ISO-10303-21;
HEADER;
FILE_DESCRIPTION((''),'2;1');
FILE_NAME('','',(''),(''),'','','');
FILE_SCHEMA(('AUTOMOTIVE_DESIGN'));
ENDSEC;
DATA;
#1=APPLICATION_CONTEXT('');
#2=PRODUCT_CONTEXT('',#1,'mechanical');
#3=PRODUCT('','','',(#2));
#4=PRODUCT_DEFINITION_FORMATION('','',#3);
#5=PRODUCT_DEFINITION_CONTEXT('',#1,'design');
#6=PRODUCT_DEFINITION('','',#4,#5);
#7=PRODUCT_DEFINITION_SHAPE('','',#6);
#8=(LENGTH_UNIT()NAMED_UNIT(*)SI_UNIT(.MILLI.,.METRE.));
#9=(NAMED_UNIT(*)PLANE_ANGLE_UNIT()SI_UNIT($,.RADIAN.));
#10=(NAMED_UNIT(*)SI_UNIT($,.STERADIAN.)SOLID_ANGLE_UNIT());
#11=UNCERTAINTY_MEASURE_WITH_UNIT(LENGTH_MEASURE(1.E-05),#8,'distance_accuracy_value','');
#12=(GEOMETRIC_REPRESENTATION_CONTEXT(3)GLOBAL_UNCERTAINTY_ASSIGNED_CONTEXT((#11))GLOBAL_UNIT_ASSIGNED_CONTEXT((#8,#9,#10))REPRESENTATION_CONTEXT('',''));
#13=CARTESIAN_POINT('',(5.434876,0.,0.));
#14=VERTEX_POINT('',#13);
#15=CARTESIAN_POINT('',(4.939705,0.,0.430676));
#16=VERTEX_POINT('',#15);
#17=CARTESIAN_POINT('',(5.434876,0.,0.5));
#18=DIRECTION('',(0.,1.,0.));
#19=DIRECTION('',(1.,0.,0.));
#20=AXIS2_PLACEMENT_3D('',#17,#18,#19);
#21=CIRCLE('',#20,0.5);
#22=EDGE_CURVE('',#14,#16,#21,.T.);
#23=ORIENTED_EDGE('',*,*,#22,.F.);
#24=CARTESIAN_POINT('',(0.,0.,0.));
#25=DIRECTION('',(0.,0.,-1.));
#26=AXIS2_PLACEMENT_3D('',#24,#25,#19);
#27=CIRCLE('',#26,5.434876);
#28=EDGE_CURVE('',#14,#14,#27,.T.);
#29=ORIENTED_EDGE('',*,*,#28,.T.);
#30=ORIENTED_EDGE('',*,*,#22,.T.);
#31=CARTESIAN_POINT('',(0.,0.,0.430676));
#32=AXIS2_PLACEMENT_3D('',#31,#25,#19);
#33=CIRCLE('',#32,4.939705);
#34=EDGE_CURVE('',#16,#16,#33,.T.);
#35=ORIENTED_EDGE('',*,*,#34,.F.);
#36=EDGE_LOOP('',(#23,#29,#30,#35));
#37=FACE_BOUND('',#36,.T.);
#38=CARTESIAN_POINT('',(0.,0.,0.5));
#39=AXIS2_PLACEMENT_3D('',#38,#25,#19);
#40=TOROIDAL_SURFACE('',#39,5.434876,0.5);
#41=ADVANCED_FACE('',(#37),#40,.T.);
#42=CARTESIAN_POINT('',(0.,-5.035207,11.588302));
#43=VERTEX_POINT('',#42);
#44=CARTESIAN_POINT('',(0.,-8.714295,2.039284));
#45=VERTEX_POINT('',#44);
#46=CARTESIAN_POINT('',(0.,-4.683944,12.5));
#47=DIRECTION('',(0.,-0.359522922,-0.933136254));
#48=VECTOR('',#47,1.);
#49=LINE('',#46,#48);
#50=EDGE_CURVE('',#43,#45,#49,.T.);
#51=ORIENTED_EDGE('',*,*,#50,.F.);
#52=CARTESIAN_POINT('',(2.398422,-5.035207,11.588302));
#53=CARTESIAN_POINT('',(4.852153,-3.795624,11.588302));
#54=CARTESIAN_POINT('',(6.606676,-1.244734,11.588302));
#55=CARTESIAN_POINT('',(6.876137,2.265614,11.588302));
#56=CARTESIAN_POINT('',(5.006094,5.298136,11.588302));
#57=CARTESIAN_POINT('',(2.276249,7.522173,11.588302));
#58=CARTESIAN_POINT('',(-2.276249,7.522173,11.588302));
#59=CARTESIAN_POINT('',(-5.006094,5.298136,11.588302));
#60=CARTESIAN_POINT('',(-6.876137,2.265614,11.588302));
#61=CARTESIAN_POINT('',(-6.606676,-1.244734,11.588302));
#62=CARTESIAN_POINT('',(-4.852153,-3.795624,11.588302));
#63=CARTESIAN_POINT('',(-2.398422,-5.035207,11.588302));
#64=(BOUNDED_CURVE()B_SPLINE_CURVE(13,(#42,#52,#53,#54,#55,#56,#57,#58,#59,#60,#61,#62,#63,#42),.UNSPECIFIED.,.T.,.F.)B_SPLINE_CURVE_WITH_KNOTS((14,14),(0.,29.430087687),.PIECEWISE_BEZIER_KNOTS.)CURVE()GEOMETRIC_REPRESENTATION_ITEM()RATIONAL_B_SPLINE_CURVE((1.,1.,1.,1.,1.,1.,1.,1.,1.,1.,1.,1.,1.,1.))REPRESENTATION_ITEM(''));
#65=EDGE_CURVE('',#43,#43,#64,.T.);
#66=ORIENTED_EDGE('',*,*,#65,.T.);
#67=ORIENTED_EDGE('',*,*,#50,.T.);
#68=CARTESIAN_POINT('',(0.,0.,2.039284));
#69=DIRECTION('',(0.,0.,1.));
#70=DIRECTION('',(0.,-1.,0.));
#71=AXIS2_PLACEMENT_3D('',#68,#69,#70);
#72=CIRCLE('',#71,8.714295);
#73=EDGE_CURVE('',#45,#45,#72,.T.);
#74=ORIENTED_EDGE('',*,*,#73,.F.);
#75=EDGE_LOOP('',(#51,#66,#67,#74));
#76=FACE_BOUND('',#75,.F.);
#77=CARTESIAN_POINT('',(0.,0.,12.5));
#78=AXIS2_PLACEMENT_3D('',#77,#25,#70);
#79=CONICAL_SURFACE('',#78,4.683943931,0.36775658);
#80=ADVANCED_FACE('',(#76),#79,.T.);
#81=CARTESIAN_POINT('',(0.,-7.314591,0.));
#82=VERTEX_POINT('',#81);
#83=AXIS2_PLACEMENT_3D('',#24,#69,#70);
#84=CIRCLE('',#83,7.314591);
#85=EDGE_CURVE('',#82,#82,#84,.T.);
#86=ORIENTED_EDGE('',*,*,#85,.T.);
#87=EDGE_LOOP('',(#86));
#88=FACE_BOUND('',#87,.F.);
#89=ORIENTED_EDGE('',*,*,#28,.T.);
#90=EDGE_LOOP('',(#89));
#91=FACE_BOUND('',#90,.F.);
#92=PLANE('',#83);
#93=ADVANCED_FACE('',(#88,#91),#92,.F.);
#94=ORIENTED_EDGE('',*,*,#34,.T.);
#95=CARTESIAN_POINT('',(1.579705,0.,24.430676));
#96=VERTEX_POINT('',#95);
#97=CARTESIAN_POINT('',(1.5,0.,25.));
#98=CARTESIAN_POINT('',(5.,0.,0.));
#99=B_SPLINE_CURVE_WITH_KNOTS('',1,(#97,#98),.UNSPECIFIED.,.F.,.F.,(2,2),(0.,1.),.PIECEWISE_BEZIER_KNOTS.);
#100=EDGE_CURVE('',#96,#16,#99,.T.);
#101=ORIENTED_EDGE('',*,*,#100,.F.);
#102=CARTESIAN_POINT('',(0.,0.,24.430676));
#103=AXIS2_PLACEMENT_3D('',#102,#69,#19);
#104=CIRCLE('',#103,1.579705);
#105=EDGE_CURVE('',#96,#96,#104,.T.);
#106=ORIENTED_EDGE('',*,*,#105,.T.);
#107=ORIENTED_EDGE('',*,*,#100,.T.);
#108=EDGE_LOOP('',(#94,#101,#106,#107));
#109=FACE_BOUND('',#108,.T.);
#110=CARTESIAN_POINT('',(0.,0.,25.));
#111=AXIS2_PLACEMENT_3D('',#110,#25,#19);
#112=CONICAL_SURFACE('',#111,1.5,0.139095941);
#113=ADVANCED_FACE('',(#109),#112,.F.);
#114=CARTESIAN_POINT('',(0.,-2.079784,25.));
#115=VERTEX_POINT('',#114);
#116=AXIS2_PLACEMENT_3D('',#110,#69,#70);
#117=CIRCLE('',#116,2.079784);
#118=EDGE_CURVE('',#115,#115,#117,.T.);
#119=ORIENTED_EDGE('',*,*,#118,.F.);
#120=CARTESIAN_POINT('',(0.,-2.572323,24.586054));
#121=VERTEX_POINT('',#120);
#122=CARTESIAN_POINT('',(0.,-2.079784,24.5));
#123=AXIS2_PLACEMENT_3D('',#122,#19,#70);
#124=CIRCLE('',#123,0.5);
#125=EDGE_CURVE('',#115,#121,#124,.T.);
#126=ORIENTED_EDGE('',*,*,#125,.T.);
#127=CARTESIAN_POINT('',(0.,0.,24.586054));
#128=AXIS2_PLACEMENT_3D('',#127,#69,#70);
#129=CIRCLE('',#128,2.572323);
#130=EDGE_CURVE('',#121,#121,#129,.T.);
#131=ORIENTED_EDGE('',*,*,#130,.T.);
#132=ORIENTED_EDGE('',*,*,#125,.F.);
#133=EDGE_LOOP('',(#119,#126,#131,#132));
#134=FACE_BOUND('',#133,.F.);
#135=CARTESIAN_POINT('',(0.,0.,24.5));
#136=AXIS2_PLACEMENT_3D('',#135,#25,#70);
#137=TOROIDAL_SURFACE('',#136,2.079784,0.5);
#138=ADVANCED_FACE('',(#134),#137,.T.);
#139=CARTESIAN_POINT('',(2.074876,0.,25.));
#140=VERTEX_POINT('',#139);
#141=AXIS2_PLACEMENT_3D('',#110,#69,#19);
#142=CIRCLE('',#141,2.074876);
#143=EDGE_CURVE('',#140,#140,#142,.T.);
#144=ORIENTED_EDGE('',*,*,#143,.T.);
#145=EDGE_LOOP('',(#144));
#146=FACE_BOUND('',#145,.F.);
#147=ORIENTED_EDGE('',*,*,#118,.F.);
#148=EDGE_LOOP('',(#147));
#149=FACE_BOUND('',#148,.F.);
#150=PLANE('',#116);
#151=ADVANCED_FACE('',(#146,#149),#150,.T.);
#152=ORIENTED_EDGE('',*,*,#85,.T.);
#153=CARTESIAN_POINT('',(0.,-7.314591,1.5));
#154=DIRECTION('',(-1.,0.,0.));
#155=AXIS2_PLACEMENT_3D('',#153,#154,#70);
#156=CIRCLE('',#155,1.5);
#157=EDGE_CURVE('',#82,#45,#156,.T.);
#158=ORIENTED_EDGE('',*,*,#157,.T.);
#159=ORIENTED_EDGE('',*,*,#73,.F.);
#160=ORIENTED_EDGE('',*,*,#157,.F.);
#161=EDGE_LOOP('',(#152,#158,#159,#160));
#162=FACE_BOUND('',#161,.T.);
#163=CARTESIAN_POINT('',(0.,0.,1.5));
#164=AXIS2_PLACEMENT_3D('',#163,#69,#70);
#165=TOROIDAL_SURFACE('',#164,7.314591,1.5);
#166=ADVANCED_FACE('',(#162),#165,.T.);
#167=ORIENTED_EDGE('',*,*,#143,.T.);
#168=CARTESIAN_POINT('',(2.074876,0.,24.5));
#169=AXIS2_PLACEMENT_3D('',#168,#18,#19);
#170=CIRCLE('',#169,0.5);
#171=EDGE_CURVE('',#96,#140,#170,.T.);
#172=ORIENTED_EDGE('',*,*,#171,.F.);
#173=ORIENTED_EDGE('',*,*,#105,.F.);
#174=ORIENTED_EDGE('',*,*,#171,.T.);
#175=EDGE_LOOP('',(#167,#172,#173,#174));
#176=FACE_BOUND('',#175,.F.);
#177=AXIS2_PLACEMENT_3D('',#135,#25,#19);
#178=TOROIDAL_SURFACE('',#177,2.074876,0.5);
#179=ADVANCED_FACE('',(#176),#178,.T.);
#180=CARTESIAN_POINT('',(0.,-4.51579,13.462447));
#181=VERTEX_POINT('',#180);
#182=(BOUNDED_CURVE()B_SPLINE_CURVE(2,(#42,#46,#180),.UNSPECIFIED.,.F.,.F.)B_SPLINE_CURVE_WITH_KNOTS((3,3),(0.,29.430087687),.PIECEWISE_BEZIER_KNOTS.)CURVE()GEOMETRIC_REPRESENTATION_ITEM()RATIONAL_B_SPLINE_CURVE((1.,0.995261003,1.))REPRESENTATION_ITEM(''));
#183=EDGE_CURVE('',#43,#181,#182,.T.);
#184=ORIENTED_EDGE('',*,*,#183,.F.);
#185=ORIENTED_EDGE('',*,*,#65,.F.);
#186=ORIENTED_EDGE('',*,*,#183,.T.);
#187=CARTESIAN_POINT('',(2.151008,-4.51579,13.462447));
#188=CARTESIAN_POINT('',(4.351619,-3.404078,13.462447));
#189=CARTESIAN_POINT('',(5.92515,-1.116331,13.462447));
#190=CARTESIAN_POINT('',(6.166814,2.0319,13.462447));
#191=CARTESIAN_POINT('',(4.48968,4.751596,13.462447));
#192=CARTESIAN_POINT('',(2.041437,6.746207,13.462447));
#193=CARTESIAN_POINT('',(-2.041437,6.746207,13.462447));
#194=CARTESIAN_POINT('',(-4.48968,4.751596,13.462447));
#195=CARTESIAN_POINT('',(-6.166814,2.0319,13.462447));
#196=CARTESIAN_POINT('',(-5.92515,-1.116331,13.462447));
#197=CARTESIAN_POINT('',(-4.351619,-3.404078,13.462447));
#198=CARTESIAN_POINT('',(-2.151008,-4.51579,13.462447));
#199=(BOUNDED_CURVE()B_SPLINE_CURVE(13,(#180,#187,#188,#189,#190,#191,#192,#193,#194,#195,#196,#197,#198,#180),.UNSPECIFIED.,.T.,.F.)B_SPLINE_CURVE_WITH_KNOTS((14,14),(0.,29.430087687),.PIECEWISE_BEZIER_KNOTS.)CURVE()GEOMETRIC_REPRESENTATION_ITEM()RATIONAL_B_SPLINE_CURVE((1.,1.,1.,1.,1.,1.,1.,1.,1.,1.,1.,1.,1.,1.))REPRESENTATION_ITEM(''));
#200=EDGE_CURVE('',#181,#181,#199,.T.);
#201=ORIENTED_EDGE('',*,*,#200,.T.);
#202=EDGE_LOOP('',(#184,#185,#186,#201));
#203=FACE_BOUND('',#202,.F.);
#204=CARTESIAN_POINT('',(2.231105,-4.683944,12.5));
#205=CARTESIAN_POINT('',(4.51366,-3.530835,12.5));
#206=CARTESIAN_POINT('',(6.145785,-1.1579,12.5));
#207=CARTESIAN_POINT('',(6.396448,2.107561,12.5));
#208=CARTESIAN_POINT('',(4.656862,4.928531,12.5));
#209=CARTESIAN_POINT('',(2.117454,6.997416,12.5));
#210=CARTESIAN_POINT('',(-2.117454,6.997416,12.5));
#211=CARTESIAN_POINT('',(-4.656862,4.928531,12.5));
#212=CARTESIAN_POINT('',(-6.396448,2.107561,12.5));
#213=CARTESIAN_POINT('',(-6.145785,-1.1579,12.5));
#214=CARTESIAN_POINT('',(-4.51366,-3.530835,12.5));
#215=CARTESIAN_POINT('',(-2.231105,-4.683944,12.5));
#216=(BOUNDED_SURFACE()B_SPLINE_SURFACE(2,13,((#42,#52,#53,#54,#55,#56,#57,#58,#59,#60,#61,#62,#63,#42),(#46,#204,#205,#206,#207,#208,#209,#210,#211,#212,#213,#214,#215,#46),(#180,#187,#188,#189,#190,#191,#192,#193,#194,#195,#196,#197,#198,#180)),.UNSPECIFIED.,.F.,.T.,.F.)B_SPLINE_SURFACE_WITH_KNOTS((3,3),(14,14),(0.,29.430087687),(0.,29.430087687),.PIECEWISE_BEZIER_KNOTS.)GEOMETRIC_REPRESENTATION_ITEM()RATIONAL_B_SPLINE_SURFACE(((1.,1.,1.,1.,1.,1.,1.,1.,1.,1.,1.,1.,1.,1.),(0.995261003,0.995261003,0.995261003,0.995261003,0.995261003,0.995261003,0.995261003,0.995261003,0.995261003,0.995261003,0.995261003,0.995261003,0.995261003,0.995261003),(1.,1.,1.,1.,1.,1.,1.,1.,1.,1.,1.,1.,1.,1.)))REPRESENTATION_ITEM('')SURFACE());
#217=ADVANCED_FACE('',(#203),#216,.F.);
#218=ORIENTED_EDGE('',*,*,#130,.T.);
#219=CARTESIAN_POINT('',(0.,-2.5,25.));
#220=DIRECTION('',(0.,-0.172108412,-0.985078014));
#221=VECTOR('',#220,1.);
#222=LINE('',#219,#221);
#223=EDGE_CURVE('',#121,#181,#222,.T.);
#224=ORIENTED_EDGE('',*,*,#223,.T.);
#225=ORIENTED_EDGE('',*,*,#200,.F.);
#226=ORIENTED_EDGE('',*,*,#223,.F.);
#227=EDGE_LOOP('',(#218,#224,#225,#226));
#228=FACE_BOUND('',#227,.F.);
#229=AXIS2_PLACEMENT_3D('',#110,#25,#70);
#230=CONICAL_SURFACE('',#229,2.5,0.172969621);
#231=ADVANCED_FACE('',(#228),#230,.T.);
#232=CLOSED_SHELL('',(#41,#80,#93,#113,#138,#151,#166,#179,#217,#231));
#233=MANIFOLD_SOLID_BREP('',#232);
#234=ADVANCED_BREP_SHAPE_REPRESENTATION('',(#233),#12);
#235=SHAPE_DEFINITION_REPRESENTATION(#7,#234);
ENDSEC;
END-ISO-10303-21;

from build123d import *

# Parameters (mm, degrees)
F3_R = 1.5
F2_R = 5
F5_R = 1.5
F6_R = 0.5
F7_R = 10


with BuildPart() as f1:
    # F0 (on Right) → F1 (revolve)
    with BuildSketch(Plane.YZ):
        Polygon((-9.5, 0), (0, 0), (0, 25), (-2.5, 25), (-4.683943931, 12.5), align=None)
    revolve(axis=Axis((0, 0, 12.5), (0, 0, 1)))

    # F3 (on face) → F4 section 0
    with BuildSketch(Plane.XY.offset(25)):
        Circle(F3_R)
    # F2 (on face) → F4 section 1
    with BuildSketch(Plane(origin=(0, 0, 0), x_dir=(1, 0, 0), z_dir=(0, 0, -1))):
        Circle(F2_R)
    loft(mode=Mode.SUBTRACT)

    # F5
    f5_edges = [f1.edges().sort_by_distance(p)[0] for p in [
        (0, 9.5, 0),
    ]]
    fillet(f5_edges, radius=F5_R)

    # F6
    f6_edges = [f1.edges().sort_by_distance(p)[0] for p in [
        (-5, 0, 0),
        (0, 2.5, 25),
        (-1.5, 0, 25),
    ]]
    fillet(f6_edges, radius=F6_R)

    # F7
    f7_edges = [f1.edges().sort_by_distance(p)[0] for p in [
        (0, 4.683944, 12.5),
    ]]
    fillet(f7_edges, radius=F7_R)


solid = f1.part
